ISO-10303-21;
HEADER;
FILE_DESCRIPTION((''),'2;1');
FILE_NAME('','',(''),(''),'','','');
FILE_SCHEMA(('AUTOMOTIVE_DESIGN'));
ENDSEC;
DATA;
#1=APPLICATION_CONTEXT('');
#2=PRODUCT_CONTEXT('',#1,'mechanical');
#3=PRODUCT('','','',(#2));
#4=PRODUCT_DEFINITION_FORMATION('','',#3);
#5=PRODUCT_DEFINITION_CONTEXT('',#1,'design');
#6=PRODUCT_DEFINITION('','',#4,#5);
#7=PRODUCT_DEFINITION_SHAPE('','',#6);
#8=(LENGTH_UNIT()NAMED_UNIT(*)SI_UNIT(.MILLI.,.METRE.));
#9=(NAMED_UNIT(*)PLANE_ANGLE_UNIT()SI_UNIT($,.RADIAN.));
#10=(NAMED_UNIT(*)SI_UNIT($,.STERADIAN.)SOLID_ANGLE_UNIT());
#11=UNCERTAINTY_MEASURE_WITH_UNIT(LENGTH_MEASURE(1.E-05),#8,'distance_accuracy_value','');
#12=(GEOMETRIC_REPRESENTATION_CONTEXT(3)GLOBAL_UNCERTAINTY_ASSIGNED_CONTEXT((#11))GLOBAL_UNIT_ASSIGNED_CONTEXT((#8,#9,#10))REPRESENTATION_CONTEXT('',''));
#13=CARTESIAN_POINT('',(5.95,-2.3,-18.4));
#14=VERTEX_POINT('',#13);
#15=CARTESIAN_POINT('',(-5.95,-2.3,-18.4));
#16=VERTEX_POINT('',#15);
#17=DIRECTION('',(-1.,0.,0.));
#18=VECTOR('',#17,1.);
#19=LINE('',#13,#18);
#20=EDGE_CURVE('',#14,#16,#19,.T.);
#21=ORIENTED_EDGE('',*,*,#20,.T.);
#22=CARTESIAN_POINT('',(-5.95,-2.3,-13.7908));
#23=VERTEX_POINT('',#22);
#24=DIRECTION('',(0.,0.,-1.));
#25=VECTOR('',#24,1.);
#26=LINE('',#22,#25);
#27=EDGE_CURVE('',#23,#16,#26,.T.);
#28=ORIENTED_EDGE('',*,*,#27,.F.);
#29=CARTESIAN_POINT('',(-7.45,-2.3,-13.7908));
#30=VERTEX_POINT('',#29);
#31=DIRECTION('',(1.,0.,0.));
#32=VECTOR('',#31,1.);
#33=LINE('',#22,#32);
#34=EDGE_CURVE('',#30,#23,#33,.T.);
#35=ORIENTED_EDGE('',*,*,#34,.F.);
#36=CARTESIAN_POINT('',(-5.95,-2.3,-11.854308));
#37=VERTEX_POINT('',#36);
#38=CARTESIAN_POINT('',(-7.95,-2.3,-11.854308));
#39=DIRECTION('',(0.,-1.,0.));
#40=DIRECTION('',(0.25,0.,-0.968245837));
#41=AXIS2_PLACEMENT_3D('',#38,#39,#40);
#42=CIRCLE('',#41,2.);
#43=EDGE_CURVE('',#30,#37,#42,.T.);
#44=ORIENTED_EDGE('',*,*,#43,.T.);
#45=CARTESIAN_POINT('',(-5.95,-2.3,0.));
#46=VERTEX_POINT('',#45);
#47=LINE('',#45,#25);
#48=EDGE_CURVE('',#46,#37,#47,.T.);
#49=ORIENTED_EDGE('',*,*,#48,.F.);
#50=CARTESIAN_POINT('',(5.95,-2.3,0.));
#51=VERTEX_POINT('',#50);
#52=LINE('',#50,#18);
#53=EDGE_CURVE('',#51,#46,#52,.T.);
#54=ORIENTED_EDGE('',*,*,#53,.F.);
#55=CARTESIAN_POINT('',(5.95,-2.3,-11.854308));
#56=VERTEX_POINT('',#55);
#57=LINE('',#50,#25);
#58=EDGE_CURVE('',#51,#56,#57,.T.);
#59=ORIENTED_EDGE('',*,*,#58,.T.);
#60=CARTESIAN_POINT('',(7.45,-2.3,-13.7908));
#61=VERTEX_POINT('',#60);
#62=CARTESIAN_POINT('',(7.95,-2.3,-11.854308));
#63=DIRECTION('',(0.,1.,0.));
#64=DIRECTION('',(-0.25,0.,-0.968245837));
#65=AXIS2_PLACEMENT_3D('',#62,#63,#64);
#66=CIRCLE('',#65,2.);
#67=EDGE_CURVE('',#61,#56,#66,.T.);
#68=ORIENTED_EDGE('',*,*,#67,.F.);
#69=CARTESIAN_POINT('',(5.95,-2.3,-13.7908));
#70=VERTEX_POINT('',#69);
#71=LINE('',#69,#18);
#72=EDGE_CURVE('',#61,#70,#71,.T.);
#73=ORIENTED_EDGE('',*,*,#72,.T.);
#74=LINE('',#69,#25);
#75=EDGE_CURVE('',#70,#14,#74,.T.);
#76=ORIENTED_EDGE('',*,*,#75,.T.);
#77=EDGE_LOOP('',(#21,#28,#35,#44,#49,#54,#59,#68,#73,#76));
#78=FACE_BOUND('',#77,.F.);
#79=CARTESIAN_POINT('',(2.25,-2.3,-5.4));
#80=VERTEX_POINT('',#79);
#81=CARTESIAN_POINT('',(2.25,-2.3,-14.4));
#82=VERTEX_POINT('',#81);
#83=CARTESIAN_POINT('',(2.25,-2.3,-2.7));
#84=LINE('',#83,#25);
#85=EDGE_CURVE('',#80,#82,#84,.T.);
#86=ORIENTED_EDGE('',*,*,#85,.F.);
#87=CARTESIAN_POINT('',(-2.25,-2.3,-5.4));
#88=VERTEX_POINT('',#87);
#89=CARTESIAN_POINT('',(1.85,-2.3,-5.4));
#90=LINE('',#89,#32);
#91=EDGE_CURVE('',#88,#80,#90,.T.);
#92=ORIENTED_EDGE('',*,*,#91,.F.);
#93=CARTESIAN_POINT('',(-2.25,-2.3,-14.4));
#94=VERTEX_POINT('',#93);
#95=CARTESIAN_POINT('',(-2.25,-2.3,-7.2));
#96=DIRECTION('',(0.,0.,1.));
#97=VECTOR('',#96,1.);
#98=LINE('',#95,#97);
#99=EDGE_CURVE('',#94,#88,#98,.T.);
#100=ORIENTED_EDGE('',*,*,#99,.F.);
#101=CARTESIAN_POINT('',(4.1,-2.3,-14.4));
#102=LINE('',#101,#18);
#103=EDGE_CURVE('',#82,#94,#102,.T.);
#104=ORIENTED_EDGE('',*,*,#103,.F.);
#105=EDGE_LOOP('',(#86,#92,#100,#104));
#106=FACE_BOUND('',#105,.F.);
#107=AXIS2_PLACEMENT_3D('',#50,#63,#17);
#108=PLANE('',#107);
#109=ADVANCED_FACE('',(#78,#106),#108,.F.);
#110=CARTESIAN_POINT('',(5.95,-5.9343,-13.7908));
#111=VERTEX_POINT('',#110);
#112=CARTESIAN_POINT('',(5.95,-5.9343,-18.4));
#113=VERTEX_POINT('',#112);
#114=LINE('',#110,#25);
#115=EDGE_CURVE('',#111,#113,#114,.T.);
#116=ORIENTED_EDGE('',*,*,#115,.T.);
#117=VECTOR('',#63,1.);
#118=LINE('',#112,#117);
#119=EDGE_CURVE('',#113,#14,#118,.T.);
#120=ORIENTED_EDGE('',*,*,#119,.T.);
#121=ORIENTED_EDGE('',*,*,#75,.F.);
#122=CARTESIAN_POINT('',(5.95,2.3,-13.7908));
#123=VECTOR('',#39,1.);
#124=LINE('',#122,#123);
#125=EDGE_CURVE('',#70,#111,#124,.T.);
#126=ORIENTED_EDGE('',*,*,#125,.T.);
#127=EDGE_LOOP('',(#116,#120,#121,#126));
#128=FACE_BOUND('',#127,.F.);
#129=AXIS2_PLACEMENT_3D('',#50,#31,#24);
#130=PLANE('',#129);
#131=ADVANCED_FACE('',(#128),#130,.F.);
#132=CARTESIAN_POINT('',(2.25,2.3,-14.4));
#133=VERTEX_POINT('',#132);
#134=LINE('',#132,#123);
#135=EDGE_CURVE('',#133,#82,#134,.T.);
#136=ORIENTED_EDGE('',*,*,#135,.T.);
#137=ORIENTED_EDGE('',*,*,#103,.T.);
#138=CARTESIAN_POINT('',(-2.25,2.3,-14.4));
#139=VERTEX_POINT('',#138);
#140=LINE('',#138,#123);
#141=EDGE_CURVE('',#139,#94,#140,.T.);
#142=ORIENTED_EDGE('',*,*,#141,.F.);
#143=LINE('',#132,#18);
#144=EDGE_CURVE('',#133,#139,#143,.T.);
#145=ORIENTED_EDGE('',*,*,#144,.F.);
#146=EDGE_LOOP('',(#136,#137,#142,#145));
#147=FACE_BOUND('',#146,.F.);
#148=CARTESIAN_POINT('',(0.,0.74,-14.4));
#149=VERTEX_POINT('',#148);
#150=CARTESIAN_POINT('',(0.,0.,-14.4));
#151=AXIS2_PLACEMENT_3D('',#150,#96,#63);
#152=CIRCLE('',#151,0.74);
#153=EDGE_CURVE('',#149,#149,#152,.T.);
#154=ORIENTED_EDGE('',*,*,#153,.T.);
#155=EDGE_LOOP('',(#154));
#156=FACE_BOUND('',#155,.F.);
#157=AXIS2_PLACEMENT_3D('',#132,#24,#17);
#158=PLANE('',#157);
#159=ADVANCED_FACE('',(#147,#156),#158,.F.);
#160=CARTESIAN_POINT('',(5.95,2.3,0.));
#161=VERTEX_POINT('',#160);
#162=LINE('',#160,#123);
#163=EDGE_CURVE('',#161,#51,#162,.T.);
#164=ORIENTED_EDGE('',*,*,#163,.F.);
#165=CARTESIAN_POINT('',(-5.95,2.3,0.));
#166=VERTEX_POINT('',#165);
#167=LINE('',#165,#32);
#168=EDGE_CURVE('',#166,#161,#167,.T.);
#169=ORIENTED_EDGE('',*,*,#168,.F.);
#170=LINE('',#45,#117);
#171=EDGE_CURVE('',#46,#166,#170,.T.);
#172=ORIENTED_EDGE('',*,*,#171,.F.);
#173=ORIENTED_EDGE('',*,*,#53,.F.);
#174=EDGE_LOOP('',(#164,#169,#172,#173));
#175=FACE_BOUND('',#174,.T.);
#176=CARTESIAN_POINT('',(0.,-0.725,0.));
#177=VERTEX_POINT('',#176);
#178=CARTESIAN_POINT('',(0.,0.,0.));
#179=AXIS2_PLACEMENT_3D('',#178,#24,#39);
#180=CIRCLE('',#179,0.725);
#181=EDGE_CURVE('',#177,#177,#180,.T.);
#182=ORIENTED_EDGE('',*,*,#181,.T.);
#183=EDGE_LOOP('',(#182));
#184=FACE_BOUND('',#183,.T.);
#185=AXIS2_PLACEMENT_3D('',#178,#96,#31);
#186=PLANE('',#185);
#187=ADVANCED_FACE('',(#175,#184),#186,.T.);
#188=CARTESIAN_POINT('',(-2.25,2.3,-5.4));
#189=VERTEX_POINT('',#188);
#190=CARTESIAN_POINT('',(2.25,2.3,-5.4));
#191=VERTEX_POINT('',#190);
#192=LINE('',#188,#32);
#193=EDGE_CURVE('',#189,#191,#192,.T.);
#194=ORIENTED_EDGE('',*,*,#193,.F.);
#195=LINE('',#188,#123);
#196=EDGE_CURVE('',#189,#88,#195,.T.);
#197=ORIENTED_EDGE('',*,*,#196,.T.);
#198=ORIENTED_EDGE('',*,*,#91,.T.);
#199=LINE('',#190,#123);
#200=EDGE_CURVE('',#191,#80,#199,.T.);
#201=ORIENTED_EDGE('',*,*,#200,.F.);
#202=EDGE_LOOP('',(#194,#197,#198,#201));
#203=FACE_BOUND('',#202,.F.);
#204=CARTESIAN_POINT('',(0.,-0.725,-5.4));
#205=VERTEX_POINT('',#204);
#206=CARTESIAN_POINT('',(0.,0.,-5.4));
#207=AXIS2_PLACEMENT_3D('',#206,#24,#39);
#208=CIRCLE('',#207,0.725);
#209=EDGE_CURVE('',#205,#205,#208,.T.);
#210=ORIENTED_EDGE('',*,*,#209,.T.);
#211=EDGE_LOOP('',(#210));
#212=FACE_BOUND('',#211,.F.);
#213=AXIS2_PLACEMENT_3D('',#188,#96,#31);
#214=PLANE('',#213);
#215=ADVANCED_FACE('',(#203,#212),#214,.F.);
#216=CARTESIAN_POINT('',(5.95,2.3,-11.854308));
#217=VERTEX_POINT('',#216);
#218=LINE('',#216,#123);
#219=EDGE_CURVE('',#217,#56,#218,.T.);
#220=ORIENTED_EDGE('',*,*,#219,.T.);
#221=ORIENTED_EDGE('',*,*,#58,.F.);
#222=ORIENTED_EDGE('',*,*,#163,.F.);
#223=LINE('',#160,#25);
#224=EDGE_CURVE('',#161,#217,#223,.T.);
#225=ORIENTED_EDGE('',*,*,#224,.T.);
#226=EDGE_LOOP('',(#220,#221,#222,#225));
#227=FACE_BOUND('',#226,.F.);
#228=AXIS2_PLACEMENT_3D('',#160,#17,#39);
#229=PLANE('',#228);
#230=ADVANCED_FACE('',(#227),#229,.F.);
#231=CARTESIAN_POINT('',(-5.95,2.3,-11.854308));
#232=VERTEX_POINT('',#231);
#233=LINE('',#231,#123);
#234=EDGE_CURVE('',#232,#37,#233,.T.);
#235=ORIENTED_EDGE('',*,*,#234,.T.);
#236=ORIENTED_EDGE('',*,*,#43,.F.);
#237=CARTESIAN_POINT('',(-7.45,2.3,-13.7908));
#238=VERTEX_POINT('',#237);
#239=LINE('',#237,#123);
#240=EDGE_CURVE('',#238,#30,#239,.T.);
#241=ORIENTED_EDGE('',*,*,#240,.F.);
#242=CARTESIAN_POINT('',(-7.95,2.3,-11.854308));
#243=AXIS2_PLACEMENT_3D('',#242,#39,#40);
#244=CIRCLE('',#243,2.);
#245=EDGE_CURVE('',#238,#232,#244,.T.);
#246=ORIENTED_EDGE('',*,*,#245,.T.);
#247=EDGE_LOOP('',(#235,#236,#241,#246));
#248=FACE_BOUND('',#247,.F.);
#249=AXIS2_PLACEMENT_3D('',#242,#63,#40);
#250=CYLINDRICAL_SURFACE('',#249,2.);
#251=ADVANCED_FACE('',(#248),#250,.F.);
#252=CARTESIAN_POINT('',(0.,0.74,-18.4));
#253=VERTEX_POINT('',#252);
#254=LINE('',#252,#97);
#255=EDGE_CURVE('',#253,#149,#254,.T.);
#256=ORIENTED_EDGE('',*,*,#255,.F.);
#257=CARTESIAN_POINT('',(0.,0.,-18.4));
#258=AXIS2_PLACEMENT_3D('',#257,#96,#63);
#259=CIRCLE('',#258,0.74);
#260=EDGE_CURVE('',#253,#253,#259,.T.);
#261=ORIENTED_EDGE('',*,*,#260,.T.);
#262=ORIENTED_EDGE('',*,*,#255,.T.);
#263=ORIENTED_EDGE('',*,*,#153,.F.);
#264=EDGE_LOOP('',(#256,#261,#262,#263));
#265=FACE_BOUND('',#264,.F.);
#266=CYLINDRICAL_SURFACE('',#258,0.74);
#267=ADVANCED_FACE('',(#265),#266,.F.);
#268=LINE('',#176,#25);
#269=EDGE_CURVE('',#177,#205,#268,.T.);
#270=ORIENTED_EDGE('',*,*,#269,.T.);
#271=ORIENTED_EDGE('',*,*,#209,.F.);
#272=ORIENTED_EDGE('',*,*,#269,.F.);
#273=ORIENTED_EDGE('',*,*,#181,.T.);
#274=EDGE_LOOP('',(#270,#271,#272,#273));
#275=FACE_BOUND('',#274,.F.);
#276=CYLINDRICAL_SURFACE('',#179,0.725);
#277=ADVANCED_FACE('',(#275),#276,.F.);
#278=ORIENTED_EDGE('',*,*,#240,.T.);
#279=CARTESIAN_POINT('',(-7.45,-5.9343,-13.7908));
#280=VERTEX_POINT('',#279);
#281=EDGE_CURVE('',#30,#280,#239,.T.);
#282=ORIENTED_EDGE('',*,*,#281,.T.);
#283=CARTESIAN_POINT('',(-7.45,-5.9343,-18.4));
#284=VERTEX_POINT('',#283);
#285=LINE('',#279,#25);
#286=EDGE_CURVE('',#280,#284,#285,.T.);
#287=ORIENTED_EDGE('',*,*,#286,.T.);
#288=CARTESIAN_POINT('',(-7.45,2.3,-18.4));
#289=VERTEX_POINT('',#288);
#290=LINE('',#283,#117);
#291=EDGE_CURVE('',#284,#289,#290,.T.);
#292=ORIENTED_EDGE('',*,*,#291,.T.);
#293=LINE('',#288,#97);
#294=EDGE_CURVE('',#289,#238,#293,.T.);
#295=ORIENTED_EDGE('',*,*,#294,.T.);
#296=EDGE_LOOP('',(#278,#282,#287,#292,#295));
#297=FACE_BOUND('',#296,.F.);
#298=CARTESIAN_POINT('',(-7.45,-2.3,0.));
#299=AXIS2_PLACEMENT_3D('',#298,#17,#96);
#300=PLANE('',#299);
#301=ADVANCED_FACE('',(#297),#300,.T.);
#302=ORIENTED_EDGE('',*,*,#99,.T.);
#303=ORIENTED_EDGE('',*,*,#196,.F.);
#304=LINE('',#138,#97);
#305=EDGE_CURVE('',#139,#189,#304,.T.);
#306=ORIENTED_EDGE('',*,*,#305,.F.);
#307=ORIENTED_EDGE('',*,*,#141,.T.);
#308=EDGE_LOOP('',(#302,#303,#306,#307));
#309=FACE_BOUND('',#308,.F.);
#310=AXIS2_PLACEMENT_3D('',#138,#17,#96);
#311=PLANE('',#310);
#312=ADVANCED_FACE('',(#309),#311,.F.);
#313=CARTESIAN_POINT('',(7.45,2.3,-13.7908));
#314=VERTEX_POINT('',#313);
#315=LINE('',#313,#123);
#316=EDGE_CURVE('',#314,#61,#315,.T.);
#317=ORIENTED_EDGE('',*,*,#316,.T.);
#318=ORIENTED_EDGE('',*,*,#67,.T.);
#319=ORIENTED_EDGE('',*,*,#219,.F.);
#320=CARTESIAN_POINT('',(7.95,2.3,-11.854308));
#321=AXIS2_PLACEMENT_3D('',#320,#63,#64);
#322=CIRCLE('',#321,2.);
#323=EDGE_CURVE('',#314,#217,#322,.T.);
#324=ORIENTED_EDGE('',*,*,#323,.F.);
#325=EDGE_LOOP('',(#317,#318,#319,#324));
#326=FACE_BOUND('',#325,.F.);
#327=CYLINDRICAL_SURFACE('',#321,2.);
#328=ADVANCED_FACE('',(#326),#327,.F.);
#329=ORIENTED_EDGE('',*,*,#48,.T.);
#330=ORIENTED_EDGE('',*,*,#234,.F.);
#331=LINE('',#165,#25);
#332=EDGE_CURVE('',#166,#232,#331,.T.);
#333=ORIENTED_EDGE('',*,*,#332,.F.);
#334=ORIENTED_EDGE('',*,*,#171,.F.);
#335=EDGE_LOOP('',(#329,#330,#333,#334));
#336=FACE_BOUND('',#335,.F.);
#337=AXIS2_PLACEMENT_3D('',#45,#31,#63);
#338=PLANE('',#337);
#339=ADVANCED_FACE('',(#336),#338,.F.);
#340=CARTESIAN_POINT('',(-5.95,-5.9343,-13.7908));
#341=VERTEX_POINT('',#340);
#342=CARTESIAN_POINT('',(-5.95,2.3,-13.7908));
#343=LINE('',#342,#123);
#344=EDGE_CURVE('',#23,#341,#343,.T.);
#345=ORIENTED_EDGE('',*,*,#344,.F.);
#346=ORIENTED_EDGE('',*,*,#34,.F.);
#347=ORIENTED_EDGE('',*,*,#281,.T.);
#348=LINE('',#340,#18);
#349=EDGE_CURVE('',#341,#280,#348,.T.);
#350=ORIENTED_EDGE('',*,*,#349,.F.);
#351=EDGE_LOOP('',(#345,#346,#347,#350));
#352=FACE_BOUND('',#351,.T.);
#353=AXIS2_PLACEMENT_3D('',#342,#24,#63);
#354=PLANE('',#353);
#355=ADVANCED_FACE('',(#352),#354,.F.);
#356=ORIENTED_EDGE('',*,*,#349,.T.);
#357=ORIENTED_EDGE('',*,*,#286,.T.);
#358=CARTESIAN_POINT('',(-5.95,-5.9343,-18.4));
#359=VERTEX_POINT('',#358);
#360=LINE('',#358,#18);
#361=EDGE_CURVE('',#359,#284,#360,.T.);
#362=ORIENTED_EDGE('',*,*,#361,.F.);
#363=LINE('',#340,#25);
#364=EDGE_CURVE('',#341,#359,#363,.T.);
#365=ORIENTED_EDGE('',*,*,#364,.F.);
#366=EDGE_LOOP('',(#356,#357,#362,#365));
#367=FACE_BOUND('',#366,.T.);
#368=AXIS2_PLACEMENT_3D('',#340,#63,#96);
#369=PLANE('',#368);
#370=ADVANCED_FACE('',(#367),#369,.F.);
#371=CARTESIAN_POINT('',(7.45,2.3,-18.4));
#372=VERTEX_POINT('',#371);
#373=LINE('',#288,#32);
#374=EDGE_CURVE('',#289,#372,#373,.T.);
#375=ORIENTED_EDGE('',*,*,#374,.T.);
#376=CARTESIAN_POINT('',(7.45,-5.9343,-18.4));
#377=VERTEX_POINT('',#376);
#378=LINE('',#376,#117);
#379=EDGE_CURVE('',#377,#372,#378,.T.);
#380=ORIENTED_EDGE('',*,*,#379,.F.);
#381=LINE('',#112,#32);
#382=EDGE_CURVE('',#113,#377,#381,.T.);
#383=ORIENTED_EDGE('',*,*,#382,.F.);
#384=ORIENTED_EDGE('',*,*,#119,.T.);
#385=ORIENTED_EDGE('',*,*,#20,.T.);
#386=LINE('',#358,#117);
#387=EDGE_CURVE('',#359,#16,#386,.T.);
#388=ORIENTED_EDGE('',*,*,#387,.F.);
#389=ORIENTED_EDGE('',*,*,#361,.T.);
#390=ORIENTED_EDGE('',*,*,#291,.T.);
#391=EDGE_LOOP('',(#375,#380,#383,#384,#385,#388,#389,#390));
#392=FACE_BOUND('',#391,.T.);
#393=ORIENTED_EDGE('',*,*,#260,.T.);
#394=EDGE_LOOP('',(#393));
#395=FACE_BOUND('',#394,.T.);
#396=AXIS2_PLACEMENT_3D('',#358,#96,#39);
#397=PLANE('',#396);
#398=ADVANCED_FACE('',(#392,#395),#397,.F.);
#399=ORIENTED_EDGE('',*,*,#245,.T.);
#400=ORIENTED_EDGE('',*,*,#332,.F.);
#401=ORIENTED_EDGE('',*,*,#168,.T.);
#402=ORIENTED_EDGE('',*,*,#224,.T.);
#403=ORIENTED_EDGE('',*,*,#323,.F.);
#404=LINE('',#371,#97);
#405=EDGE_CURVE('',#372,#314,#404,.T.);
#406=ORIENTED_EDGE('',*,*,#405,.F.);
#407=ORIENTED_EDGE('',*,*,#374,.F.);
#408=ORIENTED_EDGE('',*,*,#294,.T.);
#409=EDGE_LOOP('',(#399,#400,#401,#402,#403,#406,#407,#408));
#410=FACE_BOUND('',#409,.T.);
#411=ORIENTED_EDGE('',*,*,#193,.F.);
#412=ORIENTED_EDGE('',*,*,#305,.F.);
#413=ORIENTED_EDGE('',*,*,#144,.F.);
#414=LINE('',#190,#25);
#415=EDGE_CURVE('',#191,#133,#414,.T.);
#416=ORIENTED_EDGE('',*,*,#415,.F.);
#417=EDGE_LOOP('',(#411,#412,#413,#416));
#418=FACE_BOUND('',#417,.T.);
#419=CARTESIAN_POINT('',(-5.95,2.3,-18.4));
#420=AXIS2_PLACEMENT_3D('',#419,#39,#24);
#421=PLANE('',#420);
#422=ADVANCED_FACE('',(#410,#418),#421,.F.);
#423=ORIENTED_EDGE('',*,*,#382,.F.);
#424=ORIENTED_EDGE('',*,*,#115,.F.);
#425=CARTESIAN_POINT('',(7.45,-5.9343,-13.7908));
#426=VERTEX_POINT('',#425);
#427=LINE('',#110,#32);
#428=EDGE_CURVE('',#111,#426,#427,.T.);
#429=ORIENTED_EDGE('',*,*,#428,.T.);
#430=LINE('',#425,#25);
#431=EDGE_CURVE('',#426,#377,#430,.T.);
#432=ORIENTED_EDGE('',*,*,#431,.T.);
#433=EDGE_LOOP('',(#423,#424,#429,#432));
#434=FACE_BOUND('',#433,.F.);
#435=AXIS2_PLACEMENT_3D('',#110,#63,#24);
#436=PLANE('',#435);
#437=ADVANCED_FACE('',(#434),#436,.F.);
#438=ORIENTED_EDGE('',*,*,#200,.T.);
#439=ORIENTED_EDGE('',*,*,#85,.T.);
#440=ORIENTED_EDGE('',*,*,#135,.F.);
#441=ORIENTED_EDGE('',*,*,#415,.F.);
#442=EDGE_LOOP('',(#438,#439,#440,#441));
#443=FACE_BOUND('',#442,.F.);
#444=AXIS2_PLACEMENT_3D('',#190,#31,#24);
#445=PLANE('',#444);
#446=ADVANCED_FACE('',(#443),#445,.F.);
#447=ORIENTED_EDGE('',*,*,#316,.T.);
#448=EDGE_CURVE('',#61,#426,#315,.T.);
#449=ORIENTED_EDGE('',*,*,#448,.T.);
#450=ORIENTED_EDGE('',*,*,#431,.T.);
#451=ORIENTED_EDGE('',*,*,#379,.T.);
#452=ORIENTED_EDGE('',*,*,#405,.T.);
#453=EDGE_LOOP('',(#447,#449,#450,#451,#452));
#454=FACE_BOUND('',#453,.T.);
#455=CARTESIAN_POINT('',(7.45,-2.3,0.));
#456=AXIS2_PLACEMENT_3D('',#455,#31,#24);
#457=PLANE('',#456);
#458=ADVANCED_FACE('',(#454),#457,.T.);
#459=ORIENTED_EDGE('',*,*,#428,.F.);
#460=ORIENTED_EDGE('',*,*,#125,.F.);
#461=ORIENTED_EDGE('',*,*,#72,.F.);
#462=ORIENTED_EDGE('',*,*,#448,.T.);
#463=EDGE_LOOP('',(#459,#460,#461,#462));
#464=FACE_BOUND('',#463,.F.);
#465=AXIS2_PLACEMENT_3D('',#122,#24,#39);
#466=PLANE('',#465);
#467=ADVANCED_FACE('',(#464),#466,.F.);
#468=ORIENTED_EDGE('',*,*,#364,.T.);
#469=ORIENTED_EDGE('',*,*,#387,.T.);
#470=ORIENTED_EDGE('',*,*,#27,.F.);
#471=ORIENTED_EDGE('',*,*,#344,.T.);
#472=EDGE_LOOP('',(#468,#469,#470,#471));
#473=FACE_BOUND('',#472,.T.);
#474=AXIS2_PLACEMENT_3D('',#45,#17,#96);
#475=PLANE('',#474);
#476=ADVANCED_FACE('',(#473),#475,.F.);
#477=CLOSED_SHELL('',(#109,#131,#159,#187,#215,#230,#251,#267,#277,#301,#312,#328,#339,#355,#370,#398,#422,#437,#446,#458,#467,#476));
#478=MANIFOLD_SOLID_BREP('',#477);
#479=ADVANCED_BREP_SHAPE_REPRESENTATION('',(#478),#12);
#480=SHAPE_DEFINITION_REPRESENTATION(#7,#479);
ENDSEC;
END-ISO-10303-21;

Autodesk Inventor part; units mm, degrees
ref_plane "YZ Plane" through (0, 0, 0) normal (1, 0, 0) x (0, 1, 0)
ref_plane "XZ Plane" through (0, 0, 0) normal (0, 1, 0) x (-1, 0, 0)
ref_plane "XY Plane" through (0, 0, 0) normal (0, 0, 1) x (1, 0, 0)
sketch "Sketch6" plane through (0, 0, 0) normal (0, 0, 1) x (1, 0, 0)
  line L0 (-5.95, 2.3) -> (5.95, 2.3)
  line L1 (5.95, 2.3) -> (5.95, -2.3)
  line L2 (5.95, -2.3) -> (-5.95, -2.3)
  line L3 (-5.95, -2.3) -> (-5.95, 2.3)
  line L4 (-5.95, 2.3) -> (5.95, -2.3) construction
  line L5 (5.95, 2.3) -> (-5.95, -2.3) construction
  point P0 (0, 0)
  point P1 (0, 0)
  dimension "d66" = 11.9
  dimension "d67" = 4.6
extrude "Extrusion6" add sketch "Sketch6" against normal blind 18.4
hole "Hole6" at (0, 0, 0) direction (0, 0, -1) diameter 1.45 depth 7 tip angle 118
sketch "Sketch7" plane through (5.95, -2.3, 0) normal (1, 0, 0) x (0, 0, -1)
  line L0 (18.4, 4.6) -> (13.7908, 4.6)
  line L1 (13.7908, 4.6) -> (13.7908, -3.6343)
  line L2 (13.7908, -3.6343) -> (18.4, -3.6343)
  line L3 (18.4, -3.6343) -> (18.4, 4.6)
  point P0 (0, 2.3)
extrude "Extrusion7" add sketch "Sketch7" along normal blind 1.5
ref_plane "Work Plane13" through (0, -2.3, 0) normal (1, 0, 0) x (0, 0, -1)
mirror "Mirror1" about plane through (0, -2.3, 0) normal (1, 0, 0) of "Extrusion7"
fillet "Fillet3" radius 2 2 edges at (5.95, 0, -13.7908) (-5.95, 0, -13.7908)
sketch "Sketch8" plane through (-5.95, 2.3, 0) normal (0, 1, 0) x (1, 0, 0)
  line L0 (3.7, 5.4) -> (8.2, 5.4)
  line L1 (8.2, 5.4) -> (8.2, 14.4)
  line L2 (8.2, 14.4) -> (3.7, 14.4)
  line L3 (3.7, 14.4) -> (3.7, 5.4)
  line L4 (3.7, 5.4) -> (8.2, 14.4) construction
  line L5 (8.2, 5.4) -> (3.7, 14.4) construction
  line L6 (5.95, 22.08) -> (5.95, -3.68) construction
  line L7 (13.4, 18.4) -> (-1.5, 18.4) projected
  point P0 (5.95, 0)
  point P1 (5.95, 9.9)
  point P2 (5.95, 9.9)
  dimension "d87" = 4
  dimension "d88" = 4.5
  dimension "d101" = 9
extrude "Extrusion8" cut sketch "Sketch8" against normal through all
ref_plane "Work Plane14" through (-5.95, 0, 0) normal (0, 1, 0) x (1, 0, 0)
hole "Hole7" at (0, 0, -18.4) direction (0, 0, 1) diameter 1.48 depth 7 tip angle 118
properties part number "servo_attachement" material "ABS Plastic"
